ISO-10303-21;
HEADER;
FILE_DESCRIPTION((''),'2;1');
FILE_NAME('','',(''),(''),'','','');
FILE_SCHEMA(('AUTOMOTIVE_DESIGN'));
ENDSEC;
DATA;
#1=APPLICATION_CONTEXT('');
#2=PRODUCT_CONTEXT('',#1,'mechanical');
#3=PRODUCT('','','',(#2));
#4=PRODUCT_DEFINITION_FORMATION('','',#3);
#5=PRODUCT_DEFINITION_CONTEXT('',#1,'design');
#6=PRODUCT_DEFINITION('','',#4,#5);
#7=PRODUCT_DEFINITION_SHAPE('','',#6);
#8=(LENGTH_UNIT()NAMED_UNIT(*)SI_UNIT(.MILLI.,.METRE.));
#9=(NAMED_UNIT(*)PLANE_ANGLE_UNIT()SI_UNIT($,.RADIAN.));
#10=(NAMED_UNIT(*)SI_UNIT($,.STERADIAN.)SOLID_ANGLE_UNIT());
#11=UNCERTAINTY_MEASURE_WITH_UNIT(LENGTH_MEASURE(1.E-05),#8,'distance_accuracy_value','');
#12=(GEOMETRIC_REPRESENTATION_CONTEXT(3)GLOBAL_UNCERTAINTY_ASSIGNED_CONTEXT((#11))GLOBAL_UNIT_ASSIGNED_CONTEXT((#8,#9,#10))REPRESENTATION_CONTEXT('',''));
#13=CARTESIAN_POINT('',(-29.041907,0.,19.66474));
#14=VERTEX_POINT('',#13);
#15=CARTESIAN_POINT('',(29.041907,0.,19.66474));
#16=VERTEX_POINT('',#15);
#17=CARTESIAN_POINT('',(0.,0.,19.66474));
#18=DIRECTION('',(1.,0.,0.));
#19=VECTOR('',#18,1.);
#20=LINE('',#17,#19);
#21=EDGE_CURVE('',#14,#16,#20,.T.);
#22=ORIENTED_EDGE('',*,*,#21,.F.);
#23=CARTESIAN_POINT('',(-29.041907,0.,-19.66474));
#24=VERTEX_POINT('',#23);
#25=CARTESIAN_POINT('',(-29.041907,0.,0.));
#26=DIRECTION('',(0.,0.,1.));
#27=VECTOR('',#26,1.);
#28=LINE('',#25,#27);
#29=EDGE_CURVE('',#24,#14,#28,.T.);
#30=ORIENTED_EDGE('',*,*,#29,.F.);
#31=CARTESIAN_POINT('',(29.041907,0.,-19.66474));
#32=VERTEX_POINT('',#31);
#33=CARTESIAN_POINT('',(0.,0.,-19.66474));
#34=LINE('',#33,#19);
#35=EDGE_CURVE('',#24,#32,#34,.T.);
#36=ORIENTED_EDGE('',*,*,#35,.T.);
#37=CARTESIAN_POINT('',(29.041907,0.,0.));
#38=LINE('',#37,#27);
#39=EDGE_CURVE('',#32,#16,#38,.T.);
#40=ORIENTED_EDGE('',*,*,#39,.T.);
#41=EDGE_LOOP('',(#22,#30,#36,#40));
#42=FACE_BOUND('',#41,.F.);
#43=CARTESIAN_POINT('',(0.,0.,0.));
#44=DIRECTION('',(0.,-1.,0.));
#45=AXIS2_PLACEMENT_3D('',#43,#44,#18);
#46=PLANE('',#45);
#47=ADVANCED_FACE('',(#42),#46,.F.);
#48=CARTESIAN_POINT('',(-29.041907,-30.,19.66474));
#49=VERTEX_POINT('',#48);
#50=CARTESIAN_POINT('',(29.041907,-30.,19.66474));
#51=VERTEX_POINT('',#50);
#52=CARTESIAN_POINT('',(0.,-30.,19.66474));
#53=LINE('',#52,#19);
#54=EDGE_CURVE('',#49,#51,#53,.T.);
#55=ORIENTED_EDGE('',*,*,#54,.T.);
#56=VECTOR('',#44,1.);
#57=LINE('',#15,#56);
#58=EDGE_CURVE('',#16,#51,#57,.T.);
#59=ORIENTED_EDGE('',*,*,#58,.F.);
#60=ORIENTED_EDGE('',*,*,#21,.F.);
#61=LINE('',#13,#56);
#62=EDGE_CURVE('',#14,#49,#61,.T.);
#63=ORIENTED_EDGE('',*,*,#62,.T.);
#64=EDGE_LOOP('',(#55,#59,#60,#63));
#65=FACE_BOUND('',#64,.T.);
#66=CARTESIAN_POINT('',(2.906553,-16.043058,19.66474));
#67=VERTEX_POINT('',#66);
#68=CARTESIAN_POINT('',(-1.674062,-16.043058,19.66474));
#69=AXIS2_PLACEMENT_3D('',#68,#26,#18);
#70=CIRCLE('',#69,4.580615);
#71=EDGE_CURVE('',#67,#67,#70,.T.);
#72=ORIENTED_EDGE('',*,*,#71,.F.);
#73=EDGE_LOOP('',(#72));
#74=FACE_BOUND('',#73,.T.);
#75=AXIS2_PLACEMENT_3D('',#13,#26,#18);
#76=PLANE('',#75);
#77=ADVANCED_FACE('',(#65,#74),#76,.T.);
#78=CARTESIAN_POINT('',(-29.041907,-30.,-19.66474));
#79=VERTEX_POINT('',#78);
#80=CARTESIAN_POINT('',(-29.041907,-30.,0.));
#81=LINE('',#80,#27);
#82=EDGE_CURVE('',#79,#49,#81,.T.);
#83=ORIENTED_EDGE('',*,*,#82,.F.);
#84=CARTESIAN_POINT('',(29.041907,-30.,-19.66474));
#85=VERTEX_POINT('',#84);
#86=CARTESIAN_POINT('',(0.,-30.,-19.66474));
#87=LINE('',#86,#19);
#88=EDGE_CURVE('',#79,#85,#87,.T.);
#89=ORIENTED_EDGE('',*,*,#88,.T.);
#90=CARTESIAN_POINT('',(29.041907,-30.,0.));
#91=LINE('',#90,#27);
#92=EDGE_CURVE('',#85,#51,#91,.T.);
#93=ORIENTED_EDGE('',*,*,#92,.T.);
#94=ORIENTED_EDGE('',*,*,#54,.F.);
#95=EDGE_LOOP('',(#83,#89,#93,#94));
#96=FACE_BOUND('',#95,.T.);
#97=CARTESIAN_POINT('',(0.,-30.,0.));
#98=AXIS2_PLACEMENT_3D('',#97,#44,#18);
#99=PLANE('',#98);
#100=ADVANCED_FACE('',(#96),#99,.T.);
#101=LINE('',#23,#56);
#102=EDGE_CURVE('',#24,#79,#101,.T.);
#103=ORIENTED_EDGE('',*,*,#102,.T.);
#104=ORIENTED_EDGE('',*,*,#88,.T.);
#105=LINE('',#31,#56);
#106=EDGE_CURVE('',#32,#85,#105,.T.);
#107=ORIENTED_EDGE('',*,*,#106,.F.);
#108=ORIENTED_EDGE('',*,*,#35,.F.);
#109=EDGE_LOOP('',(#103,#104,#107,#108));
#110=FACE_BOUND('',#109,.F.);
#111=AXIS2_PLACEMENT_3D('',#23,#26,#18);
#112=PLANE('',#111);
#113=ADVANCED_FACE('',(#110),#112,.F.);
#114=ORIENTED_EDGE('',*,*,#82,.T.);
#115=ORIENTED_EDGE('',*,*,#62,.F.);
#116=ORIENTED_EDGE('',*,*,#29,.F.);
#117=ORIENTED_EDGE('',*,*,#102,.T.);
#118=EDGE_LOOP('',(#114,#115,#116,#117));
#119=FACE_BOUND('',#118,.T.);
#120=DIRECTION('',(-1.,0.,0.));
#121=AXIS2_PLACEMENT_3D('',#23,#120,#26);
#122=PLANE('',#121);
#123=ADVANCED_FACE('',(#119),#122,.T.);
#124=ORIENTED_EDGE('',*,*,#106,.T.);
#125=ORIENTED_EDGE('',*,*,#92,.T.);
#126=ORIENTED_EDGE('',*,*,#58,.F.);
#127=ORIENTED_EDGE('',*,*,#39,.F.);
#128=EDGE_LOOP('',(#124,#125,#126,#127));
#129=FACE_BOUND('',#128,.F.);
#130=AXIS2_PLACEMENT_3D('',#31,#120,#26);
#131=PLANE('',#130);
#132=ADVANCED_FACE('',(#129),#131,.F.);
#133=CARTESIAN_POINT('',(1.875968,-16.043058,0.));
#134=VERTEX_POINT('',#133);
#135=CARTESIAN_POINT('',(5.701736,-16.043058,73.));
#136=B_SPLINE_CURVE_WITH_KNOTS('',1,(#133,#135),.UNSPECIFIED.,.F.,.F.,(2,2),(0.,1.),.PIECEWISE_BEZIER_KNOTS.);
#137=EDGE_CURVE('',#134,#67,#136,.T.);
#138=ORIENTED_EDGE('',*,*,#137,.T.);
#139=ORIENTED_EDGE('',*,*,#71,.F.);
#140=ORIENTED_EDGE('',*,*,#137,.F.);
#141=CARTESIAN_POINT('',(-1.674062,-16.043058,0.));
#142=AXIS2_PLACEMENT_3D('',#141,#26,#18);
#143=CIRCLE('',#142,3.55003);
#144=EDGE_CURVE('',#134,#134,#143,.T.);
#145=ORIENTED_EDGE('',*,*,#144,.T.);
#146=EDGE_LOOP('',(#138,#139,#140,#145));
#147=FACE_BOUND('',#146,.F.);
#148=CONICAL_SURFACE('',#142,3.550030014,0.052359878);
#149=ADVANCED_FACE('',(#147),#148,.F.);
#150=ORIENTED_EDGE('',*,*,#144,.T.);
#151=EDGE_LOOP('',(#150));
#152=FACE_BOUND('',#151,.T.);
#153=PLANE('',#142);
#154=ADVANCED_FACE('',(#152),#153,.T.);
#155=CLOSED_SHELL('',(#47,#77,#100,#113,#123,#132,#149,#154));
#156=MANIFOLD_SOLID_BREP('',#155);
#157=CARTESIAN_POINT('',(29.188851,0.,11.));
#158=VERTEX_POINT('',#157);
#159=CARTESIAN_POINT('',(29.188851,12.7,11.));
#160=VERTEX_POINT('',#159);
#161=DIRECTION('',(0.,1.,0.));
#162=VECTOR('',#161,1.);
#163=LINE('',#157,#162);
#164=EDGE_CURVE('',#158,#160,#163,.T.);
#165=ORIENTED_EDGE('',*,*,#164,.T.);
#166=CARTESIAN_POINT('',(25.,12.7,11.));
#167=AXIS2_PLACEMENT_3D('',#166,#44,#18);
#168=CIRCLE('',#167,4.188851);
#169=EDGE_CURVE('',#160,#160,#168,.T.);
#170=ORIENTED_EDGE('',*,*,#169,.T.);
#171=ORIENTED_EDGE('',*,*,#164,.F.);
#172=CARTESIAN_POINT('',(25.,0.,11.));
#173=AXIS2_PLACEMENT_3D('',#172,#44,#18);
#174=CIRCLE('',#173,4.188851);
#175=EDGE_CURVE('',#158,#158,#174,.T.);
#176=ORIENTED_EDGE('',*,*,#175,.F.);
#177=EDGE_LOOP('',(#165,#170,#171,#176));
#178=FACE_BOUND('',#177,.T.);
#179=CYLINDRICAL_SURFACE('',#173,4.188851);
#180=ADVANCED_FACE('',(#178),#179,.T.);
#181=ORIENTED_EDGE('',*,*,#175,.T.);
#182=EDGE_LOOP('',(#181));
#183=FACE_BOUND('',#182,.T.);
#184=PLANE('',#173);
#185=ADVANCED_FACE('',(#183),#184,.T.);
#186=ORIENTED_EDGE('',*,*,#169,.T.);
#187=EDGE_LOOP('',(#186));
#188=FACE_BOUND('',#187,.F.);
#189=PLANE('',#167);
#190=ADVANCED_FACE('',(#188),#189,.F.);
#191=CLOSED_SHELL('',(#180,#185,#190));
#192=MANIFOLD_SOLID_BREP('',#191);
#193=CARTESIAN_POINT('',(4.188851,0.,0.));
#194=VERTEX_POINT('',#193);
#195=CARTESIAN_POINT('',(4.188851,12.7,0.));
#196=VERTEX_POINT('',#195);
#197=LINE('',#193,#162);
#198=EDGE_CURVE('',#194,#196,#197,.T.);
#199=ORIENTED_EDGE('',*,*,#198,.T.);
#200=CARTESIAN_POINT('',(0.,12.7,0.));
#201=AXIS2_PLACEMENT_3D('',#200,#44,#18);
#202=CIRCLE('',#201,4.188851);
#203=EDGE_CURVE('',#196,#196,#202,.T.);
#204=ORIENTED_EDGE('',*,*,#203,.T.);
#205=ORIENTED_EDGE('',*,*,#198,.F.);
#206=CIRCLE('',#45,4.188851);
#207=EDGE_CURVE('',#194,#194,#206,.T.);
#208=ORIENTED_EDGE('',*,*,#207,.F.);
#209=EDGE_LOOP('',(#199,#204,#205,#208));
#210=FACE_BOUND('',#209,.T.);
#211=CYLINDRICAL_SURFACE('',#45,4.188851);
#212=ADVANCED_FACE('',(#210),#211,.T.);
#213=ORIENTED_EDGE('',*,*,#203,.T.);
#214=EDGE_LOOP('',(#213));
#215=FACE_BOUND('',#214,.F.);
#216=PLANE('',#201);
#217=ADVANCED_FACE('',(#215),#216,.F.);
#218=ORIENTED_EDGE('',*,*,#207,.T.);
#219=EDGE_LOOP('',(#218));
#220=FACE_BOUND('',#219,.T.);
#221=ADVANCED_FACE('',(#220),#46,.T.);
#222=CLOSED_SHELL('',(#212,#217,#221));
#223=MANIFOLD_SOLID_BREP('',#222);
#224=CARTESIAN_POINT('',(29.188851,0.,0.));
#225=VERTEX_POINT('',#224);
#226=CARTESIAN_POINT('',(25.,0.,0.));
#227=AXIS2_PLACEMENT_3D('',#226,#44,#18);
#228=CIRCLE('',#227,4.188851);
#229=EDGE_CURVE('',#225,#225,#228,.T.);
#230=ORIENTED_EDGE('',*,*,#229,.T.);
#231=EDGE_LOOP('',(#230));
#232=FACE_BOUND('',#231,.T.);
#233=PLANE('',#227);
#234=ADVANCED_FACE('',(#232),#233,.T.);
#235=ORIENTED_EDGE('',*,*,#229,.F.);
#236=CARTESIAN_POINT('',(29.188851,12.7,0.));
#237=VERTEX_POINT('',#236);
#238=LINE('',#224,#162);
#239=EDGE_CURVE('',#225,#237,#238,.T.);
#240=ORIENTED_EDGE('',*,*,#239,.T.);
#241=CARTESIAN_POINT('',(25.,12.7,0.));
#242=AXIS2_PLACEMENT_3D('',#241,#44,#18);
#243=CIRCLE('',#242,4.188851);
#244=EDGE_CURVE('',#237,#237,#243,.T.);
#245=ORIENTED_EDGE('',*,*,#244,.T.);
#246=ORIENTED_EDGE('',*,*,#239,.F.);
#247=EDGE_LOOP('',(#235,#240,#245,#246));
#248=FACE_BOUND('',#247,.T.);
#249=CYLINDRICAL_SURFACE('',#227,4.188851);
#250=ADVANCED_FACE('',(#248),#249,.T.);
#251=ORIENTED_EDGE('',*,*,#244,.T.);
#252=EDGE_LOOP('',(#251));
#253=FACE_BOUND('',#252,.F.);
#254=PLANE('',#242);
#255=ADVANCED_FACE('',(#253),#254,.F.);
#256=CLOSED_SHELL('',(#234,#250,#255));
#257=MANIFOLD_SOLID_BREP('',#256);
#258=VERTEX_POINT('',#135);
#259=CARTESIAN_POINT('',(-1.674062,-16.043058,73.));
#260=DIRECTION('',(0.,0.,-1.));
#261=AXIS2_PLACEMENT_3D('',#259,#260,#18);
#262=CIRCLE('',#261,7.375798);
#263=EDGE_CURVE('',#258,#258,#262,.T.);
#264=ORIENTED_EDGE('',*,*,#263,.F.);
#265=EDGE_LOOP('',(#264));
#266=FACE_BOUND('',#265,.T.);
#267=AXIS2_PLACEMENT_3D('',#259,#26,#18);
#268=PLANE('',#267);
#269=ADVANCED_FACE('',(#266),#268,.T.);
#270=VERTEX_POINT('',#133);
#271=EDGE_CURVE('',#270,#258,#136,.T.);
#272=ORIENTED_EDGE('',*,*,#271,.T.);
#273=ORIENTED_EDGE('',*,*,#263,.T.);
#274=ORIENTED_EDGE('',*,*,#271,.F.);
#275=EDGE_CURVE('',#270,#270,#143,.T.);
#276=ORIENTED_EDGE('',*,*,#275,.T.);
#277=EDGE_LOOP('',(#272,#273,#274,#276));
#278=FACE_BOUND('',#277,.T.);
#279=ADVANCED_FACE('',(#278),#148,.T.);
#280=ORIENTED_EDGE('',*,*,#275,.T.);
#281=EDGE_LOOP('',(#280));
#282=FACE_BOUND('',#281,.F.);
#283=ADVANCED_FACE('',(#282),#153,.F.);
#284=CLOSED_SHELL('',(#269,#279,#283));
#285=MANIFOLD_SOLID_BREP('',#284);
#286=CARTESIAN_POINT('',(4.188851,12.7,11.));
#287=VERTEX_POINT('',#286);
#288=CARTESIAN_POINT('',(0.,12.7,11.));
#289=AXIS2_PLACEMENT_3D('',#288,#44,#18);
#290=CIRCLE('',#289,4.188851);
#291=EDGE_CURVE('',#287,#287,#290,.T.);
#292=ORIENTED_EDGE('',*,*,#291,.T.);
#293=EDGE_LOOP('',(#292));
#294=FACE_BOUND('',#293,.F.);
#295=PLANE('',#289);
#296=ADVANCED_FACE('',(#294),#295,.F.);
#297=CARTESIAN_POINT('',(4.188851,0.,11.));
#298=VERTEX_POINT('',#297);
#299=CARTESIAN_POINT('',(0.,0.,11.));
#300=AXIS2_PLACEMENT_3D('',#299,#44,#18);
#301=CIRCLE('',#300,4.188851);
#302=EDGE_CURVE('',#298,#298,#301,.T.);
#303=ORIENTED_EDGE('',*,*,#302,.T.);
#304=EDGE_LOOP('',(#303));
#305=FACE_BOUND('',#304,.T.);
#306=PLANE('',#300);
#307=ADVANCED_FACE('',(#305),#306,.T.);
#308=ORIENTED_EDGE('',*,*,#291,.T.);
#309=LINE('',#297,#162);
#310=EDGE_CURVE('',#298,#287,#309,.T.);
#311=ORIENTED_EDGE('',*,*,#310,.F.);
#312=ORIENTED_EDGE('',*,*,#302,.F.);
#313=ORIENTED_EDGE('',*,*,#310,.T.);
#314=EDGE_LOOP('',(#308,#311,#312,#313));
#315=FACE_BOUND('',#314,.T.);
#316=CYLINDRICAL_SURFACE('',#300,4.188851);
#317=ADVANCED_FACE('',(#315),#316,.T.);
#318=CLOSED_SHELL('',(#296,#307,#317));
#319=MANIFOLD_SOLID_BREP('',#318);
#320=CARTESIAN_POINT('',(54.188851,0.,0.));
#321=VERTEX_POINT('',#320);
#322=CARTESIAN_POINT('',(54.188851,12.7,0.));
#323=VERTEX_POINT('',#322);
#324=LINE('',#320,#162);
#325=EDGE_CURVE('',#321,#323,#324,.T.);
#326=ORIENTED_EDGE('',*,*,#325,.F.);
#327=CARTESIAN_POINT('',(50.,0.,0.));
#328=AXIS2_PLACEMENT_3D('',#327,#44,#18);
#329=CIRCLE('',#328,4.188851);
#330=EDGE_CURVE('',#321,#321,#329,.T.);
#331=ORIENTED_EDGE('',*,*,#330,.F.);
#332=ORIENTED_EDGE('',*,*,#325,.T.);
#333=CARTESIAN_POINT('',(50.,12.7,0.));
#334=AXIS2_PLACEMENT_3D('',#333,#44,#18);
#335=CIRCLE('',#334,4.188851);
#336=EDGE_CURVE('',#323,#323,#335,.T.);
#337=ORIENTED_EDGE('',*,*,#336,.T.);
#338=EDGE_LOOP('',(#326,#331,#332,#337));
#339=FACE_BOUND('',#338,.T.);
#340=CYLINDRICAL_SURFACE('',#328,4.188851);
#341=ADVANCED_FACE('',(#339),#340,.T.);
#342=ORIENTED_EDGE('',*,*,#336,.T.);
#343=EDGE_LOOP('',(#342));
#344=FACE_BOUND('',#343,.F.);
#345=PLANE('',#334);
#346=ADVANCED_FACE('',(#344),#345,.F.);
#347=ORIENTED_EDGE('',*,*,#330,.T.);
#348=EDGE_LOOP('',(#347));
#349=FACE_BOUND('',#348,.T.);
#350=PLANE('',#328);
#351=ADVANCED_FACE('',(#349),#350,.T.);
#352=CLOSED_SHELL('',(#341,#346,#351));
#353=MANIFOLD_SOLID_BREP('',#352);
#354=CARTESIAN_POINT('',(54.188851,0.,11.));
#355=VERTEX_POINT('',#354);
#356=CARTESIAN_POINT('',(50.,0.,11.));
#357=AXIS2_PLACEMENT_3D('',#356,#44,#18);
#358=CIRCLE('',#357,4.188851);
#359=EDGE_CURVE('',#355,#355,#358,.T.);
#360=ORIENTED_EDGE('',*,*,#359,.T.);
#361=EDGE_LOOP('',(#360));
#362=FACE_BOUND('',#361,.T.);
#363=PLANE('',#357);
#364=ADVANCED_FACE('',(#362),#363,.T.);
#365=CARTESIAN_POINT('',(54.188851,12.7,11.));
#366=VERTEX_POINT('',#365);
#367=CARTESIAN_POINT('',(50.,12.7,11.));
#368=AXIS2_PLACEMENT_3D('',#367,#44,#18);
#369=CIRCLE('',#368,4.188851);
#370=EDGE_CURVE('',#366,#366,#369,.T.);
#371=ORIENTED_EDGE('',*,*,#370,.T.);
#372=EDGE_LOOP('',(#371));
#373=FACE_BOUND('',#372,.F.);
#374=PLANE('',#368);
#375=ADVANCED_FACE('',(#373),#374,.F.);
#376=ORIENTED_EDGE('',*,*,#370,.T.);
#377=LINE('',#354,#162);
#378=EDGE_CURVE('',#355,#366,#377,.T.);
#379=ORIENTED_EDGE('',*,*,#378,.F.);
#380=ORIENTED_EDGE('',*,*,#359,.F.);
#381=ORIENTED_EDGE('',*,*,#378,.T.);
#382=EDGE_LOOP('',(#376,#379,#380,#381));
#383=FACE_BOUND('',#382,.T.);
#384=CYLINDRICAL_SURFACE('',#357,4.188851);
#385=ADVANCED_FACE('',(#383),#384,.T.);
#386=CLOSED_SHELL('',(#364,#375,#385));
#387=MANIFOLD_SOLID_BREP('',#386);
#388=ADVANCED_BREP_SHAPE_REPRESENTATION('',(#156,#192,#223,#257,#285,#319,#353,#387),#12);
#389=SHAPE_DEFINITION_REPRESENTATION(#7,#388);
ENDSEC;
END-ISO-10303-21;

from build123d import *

# Parameters (mm, degrees)
F0_W     = 58.0838136375
F0_H     = 39.3294803798
F1_DEPTH = 30
F2_R     = 4.1888514279
F3_DEPTH = 12.7
F4_R     = 3.5500300139
F5_DEPTH = 73
F5_TAPER = -3


with BuildPart() as f1:
    # F0 (on Front) → F1 (new body)
    with BuildSketch(Plane.XZ):
        Rectangle(F0_W, F0_H)
    extrude(amount=F1_DEPTH)


with BuildPart() as f3:
    # F2 (on Front) → F3 (new body)
    with BuildSketch(Plane.XZ):
        Circle(F2_R)
    extrude(amount=-F3_DEPTH)


with BuildPart() as f3b:
    # F2 (on Front) → F3, piece 2 (new body)
    with BuildSketch(Plane.XZ):
        with Locations((0, 11)):
            Circle(F2_R)
    extrude(amount=-F3_DEPTH)


with BuildPart() as f3c:
    # F2 (on Front) → F3, piece 3 (new body)
    with BuildSketch(Plane.XZ):
        with Locations((25, 0)):
            Circle(F2_R)
    extrude(amount=-F3_DEPTH)


with BuildPart() as f3d:
    # F2 (on Front) → F3, piece 4 (new body)
    with BuildSketch(Plane.XZ):
        with Locations((25, 11)):
            Circle(F2_R)
    extrude(amount=-F3_DEPTH)


with BuildPart() as f3e:
    # F2 (on Front) → F3, piece 5 (new body)
    with BuildSketch(Plane.XZ):
        with Locations((50, 0)):
            Circle(F2_R)
    extrude(amount=-F3_DEPTH)


with BuildPart() as f3f:
    # F2 (on Front) → F3, piece 6 (new body)
    with BuildSketch(Plane.XZ):
        with Locations((50, 11)):
            Circle(F2_R)
    extrude(amount=-F3_DEPTH)


with BuildPart() as f5:
    # F4 (on Top) → F5 (new body)
    with BuildSketch(Plane.XY):
        with Locations((-1.6740621068, -16.0430576652)):
            Circle(F4_R)
    extrude(amount=F5_DEPTH, taper=F5_TAPER)


with BuildPart() as f1_1:
    add(f1.part)

    # F6: cut F5
    add(f5.part, mode=Mode.SUBTRACT)


solid = Compound([f3.part, f3b.part, f3c.part, f3d.part, f3e.part, f3f.part, f5.part, f1_1.part])
